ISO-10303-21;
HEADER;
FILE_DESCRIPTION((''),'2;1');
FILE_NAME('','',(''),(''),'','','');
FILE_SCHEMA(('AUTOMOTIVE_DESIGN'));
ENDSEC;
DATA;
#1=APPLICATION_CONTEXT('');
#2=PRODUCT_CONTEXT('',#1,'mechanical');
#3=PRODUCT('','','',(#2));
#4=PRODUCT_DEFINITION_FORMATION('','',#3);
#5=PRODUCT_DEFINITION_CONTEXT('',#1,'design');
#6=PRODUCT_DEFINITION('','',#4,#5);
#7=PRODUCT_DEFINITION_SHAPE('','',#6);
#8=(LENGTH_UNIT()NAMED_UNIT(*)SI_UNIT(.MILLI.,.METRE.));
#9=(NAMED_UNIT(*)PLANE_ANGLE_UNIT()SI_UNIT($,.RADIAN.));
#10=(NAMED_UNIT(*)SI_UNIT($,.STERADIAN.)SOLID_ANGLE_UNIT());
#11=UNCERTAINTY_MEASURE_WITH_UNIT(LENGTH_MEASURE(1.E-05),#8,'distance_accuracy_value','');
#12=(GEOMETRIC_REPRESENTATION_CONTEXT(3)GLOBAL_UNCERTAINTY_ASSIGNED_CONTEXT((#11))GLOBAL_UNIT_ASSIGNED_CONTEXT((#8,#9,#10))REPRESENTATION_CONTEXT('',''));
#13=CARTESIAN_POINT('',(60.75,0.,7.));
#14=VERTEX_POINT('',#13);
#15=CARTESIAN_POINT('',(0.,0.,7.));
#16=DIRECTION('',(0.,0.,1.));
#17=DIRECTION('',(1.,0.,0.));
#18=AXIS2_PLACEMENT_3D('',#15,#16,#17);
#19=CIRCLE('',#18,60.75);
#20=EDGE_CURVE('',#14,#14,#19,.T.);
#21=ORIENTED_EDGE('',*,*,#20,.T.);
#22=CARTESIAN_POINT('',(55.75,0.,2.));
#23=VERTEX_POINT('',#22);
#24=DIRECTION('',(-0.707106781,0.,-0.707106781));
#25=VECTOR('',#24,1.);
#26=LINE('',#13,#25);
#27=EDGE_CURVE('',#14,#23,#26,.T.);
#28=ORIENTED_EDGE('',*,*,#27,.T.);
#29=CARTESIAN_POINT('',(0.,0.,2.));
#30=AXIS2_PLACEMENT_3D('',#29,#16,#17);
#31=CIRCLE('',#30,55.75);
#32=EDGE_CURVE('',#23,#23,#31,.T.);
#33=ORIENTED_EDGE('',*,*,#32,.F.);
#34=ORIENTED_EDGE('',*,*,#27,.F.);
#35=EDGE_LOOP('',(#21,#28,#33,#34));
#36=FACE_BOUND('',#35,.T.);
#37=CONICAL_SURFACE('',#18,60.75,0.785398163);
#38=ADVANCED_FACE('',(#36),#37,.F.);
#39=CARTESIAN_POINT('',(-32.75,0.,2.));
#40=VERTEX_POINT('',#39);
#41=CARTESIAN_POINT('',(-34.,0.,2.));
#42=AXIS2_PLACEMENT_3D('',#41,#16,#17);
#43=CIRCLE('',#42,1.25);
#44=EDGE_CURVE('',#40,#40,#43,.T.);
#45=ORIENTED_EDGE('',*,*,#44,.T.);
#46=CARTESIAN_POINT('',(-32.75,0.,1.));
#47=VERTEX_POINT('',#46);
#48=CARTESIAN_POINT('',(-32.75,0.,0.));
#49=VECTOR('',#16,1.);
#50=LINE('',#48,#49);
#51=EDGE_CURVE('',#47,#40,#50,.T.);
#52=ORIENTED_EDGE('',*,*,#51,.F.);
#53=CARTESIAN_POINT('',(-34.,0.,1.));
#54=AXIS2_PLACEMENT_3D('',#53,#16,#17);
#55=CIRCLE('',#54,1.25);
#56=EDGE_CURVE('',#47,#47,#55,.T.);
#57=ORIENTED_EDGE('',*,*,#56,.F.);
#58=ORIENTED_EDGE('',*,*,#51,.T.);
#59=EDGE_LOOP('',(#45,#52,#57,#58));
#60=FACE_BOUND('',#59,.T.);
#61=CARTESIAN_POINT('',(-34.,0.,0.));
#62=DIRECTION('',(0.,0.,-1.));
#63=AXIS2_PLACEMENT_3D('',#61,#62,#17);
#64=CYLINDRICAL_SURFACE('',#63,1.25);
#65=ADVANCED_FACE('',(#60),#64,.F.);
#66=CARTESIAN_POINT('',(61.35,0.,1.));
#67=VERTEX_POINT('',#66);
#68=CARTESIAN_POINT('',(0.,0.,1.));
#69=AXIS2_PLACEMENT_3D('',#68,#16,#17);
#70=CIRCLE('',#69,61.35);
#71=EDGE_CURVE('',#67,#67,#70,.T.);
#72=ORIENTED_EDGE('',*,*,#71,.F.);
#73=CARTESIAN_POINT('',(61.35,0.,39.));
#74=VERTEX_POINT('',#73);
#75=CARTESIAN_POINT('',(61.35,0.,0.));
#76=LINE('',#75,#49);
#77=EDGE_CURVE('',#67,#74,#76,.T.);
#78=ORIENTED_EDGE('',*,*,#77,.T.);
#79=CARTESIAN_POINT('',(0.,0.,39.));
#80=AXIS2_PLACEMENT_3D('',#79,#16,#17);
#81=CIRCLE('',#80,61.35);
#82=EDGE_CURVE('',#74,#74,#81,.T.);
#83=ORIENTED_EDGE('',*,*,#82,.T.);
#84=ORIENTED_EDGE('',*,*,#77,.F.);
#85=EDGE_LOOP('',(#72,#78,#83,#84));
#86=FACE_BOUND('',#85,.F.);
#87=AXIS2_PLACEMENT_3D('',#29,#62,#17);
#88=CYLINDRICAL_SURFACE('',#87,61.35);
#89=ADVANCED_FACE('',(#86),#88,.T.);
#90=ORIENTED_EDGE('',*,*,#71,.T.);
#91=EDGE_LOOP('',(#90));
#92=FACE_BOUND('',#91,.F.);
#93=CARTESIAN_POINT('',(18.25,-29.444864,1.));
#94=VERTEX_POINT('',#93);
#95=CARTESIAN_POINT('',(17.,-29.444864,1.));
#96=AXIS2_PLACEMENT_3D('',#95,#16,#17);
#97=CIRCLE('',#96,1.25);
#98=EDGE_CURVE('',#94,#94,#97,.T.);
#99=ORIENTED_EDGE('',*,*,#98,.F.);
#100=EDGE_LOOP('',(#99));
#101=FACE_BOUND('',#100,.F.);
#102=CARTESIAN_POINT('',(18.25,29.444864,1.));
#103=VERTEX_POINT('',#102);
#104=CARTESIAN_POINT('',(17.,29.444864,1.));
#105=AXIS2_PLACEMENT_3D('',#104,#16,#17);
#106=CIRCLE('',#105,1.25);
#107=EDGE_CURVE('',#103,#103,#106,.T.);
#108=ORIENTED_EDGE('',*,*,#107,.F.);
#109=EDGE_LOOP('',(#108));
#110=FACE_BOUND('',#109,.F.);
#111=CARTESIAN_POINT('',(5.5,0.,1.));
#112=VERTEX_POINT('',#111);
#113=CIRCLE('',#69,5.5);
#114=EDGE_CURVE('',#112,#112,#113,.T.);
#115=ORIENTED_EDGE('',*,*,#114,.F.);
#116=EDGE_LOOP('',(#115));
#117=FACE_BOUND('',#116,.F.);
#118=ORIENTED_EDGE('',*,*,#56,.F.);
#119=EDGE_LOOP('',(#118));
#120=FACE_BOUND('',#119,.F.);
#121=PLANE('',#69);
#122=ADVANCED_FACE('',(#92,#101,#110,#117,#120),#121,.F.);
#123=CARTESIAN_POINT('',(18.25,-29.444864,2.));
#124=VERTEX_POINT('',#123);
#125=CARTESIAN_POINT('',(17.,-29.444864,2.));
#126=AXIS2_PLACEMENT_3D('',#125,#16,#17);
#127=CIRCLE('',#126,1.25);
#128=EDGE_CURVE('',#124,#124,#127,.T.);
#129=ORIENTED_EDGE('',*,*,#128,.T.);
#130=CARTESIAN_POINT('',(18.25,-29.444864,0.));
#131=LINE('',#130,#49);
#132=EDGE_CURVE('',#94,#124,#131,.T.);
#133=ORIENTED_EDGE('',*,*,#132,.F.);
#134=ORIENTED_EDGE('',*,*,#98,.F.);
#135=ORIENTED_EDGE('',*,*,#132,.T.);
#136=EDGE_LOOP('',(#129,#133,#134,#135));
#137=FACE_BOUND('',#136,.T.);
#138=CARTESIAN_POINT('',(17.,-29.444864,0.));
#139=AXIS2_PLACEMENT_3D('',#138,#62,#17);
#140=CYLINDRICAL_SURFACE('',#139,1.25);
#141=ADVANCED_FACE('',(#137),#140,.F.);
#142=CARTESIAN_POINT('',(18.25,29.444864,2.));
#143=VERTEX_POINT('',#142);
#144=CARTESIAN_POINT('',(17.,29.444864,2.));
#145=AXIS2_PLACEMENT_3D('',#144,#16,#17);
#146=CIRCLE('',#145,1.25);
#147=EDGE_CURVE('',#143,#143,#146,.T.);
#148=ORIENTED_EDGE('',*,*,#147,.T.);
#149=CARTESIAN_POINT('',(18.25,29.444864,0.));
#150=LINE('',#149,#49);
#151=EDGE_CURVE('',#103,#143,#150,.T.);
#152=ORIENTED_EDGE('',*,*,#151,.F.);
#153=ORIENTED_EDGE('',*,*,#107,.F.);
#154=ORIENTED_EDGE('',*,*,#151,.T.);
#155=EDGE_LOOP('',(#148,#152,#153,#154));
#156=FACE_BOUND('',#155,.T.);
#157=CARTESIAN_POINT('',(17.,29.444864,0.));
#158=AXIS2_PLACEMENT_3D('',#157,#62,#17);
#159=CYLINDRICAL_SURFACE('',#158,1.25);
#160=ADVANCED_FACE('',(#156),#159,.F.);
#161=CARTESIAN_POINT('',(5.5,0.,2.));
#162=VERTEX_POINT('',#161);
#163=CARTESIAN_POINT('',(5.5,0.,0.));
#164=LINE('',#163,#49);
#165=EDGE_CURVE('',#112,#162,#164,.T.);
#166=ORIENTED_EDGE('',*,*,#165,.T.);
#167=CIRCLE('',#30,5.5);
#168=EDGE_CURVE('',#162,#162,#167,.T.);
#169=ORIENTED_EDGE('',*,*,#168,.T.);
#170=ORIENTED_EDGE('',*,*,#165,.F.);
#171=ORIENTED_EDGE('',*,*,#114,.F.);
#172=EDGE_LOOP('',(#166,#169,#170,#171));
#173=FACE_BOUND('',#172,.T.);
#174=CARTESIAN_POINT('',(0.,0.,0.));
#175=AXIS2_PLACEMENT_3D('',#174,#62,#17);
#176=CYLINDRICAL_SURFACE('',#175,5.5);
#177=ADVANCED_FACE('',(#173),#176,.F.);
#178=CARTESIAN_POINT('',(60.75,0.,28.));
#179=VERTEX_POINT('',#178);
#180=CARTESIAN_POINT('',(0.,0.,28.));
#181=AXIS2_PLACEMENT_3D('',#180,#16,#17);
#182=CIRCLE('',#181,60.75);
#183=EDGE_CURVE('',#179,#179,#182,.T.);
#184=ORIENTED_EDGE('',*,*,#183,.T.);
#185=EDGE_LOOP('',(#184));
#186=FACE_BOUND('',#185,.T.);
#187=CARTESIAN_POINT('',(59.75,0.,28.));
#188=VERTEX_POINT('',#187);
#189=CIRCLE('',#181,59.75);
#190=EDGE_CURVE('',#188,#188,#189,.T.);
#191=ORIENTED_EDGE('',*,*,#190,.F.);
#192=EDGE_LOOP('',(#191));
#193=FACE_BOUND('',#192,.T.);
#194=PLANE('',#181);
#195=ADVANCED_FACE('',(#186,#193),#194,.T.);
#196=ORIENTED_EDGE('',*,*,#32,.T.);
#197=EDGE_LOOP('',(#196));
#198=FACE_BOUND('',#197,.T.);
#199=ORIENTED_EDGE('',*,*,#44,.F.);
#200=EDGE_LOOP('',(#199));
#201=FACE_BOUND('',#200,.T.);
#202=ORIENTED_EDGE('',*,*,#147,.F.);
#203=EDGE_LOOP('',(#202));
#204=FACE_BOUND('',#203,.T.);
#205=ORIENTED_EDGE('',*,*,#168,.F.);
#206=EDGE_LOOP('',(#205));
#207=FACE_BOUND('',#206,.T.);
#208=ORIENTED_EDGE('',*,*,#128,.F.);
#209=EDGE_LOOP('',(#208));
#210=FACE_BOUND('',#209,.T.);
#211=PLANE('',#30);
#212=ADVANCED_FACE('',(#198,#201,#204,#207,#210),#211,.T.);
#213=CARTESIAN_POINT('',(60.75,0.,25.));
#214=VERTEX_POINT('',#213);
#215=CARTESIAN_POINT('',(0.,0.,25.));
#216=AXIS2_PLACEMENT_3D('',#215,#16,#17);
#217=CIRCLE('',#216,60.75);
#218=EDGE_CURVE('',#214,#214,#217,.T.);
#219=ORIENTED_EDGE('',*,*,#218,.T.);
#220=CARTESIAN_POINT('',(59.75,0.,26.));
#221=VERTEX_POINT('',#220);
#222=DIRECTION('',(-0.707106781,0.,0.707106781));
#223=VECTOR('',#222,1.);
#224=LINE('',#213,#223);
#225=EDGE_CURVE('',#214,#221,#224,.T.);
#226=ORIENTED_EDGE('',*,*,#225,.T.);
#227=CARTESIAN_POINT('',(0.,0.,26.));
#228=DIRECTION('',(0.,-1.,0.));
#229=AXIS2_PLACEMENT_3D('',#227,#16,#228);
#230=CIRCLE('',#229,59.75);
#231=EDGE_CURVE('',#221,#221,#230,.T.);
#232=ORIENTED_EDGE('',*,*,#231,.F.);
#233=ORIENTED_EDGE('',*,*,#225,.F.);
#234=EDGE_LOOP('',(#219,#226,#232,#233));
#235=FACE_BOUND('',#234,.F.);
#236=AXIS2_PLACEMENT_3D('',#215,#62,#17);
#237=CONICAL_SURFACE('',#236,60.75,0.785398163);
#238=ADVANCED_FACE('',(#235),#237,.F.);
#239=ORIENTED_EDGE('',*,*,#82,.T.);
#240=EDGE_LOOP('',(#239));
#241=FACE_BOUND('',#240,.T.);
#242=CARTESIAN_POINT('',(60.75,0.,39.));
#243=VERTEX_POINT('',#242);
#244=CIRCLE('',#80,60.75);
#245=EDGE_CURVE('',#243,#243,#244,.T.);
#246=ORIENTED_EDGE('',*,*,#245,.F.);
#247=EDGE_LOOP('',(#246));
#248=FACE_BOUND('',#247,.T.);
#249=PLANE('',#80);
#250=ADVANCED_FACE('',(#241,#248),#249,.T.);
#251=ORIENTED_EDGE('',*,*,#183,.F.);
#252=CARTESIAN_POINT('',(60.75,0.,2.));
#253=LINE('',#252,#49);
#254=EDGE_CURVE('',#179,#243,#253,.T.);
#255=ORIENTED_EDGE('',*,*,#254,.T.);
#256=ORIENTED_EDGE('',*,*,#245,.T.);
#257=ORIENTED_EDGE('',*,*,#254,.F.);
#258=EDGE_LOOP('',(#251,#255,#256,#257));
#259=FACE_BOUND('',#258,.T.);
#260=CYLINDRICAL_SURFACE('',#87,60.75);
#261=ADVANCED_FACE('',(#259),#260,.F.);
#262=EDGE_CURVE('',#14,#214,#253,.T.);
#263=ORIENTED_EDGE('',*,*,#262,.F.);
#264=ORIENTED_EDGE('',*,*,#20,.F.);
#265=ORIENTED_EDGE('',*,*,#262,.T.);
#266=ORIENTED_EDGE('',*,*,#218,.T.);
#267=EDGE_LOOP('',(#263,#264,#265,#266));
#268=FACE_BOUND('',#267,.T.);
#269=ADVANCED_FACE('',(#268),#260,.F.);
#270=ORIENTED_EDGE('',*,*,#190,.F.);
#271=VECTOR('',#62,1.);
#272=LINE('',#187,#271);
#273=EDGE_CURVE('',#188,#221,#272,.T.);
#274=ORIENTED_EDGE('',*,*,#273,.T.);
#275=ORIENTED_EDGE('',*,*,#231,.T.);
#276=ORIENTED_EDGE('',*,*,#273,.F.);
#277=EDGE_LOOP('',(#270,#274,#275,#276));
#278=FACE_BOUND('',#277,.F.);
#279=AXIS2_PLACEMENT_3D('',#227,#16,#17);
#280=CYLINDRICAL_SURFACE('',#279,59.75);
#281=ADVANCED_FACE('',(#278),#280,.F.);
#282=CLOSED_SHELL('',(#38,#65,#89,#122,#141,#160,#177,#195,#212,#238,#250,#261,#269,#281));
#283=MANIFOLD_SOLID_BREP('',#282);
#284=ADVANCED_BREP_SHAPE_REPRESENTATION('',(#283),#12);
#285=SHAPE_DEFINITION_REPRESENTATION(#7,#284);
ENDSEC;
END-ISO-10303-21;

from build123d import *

# Parameters (mm, degrees)
F0_R        = 61.35
F0_R_2      = 1.25
F0_R_3      = 5.5
F1_DEPTH    = 2
F2_R        = 61.35
F2_R_2      = 60.75
F3_DEPTH    = 37
F2_R_3      = 59.75
F4_DEPTH    = 26
F5_DEPTH    = 25
F6_S5_R     = 59.75
F6_T6_DEPTH = 87
F7_SIZE     = 5
F8_DEPTH    = 1


# Not quite as in the source:
# - a fillet or chamfer that OpenCascade refuses, or shapes differently, is made with other operations: its cross-section is extruded or revolved along the edge and cut away or added


with BuildPart() as f1:
    # F0 (on Top) → F1 (new body)
    with BuildSketch(Plane.XY):
        Circle(F0_R)
        with Locations((17, -29.4448637287)):
            Circle(F0_R_2, mode=Mode.SUBTRACT)
        with Locations((-34, 0)):
            Circle(F0_R_2, mode=Mode.SUBTRACT)
        Circle(F0_R_3, mode=Mode.SUBTRACT)
        with Locations((17, 29.4448637287)):
            Circle(F0_R_2, mode=Mode.SUBTRACT)
    extrude(amount=F1_DEPTH)

    # F2 (on face) → F3 (join)
    with BuildSketch(Plane.XY.offset(2)):
        Circle(F2_R)
        Circle(F2_R_2, mode=Mode.SUBTRACT)
    extrude(amount=F3_DEPTH)

    # F2 (on face) → F4 (join)
    with BuildSketch(Plane.XY.offset(2)):
        Circle(F2_R_2)
        Circle(F2_R_3, mode=Mode.SUBTRACT)
    extrude(amount=F4_DEPTH)

    # F2 (on face) → F5 (cut)
    with BuildSketch(Plane.XY.offset(2)):
        Circle(F2_R_2)
        Circle(F2_R_3, mode=Mode.SUBTRACT)
    extrude(amount=F5_DEPTH, mode=Mode.SUBTRACT)

    # F6: chamfer of 2 on 1 edges, made by hand


with BuildPart() as f6_tool2:
    # F6_s3 → F6_t4 (revolve)
    with BuildSketch(Plane.XZ):
        Polygon((60.75, 25), (58.75, 27), (60.75, 27), align=None)
    revolve(axis=Axis((0, 0, 27), (0, 0, 1)))

    # F6_s5 → F6_t6 (cut, symmetric)
    with BuildSketch(Plane.XY.offset(26)):
        Circle(F6_S5_R)
    extrude(amount=F6_T6_DEPTH, both=True, mode=Mode.SUBTRACT)


with BuildPart() as f1_1:
    add(f1.part)

    # F6_t1: union F6_tool2
    add(f6_tool2.part)

    # F7
    f7_edges = [f1_1.edges().sort_by_distance(p)[0] for p in [
        (-60.75, 0, 2),
    ]]
    chamfer(f7_edges, length=F7_SIZE)

    # F8 (cut): a face of the model
    f8_faces = [f1_1.faces().sort_by_distance(p)[0] for p in [
        (-59.614759959, 0, 0),
    ]]
    extrude(f8_faces, amount=-F8_DEPTH, mode=Mode.SUBTRACT)


solid = f1_1.part
